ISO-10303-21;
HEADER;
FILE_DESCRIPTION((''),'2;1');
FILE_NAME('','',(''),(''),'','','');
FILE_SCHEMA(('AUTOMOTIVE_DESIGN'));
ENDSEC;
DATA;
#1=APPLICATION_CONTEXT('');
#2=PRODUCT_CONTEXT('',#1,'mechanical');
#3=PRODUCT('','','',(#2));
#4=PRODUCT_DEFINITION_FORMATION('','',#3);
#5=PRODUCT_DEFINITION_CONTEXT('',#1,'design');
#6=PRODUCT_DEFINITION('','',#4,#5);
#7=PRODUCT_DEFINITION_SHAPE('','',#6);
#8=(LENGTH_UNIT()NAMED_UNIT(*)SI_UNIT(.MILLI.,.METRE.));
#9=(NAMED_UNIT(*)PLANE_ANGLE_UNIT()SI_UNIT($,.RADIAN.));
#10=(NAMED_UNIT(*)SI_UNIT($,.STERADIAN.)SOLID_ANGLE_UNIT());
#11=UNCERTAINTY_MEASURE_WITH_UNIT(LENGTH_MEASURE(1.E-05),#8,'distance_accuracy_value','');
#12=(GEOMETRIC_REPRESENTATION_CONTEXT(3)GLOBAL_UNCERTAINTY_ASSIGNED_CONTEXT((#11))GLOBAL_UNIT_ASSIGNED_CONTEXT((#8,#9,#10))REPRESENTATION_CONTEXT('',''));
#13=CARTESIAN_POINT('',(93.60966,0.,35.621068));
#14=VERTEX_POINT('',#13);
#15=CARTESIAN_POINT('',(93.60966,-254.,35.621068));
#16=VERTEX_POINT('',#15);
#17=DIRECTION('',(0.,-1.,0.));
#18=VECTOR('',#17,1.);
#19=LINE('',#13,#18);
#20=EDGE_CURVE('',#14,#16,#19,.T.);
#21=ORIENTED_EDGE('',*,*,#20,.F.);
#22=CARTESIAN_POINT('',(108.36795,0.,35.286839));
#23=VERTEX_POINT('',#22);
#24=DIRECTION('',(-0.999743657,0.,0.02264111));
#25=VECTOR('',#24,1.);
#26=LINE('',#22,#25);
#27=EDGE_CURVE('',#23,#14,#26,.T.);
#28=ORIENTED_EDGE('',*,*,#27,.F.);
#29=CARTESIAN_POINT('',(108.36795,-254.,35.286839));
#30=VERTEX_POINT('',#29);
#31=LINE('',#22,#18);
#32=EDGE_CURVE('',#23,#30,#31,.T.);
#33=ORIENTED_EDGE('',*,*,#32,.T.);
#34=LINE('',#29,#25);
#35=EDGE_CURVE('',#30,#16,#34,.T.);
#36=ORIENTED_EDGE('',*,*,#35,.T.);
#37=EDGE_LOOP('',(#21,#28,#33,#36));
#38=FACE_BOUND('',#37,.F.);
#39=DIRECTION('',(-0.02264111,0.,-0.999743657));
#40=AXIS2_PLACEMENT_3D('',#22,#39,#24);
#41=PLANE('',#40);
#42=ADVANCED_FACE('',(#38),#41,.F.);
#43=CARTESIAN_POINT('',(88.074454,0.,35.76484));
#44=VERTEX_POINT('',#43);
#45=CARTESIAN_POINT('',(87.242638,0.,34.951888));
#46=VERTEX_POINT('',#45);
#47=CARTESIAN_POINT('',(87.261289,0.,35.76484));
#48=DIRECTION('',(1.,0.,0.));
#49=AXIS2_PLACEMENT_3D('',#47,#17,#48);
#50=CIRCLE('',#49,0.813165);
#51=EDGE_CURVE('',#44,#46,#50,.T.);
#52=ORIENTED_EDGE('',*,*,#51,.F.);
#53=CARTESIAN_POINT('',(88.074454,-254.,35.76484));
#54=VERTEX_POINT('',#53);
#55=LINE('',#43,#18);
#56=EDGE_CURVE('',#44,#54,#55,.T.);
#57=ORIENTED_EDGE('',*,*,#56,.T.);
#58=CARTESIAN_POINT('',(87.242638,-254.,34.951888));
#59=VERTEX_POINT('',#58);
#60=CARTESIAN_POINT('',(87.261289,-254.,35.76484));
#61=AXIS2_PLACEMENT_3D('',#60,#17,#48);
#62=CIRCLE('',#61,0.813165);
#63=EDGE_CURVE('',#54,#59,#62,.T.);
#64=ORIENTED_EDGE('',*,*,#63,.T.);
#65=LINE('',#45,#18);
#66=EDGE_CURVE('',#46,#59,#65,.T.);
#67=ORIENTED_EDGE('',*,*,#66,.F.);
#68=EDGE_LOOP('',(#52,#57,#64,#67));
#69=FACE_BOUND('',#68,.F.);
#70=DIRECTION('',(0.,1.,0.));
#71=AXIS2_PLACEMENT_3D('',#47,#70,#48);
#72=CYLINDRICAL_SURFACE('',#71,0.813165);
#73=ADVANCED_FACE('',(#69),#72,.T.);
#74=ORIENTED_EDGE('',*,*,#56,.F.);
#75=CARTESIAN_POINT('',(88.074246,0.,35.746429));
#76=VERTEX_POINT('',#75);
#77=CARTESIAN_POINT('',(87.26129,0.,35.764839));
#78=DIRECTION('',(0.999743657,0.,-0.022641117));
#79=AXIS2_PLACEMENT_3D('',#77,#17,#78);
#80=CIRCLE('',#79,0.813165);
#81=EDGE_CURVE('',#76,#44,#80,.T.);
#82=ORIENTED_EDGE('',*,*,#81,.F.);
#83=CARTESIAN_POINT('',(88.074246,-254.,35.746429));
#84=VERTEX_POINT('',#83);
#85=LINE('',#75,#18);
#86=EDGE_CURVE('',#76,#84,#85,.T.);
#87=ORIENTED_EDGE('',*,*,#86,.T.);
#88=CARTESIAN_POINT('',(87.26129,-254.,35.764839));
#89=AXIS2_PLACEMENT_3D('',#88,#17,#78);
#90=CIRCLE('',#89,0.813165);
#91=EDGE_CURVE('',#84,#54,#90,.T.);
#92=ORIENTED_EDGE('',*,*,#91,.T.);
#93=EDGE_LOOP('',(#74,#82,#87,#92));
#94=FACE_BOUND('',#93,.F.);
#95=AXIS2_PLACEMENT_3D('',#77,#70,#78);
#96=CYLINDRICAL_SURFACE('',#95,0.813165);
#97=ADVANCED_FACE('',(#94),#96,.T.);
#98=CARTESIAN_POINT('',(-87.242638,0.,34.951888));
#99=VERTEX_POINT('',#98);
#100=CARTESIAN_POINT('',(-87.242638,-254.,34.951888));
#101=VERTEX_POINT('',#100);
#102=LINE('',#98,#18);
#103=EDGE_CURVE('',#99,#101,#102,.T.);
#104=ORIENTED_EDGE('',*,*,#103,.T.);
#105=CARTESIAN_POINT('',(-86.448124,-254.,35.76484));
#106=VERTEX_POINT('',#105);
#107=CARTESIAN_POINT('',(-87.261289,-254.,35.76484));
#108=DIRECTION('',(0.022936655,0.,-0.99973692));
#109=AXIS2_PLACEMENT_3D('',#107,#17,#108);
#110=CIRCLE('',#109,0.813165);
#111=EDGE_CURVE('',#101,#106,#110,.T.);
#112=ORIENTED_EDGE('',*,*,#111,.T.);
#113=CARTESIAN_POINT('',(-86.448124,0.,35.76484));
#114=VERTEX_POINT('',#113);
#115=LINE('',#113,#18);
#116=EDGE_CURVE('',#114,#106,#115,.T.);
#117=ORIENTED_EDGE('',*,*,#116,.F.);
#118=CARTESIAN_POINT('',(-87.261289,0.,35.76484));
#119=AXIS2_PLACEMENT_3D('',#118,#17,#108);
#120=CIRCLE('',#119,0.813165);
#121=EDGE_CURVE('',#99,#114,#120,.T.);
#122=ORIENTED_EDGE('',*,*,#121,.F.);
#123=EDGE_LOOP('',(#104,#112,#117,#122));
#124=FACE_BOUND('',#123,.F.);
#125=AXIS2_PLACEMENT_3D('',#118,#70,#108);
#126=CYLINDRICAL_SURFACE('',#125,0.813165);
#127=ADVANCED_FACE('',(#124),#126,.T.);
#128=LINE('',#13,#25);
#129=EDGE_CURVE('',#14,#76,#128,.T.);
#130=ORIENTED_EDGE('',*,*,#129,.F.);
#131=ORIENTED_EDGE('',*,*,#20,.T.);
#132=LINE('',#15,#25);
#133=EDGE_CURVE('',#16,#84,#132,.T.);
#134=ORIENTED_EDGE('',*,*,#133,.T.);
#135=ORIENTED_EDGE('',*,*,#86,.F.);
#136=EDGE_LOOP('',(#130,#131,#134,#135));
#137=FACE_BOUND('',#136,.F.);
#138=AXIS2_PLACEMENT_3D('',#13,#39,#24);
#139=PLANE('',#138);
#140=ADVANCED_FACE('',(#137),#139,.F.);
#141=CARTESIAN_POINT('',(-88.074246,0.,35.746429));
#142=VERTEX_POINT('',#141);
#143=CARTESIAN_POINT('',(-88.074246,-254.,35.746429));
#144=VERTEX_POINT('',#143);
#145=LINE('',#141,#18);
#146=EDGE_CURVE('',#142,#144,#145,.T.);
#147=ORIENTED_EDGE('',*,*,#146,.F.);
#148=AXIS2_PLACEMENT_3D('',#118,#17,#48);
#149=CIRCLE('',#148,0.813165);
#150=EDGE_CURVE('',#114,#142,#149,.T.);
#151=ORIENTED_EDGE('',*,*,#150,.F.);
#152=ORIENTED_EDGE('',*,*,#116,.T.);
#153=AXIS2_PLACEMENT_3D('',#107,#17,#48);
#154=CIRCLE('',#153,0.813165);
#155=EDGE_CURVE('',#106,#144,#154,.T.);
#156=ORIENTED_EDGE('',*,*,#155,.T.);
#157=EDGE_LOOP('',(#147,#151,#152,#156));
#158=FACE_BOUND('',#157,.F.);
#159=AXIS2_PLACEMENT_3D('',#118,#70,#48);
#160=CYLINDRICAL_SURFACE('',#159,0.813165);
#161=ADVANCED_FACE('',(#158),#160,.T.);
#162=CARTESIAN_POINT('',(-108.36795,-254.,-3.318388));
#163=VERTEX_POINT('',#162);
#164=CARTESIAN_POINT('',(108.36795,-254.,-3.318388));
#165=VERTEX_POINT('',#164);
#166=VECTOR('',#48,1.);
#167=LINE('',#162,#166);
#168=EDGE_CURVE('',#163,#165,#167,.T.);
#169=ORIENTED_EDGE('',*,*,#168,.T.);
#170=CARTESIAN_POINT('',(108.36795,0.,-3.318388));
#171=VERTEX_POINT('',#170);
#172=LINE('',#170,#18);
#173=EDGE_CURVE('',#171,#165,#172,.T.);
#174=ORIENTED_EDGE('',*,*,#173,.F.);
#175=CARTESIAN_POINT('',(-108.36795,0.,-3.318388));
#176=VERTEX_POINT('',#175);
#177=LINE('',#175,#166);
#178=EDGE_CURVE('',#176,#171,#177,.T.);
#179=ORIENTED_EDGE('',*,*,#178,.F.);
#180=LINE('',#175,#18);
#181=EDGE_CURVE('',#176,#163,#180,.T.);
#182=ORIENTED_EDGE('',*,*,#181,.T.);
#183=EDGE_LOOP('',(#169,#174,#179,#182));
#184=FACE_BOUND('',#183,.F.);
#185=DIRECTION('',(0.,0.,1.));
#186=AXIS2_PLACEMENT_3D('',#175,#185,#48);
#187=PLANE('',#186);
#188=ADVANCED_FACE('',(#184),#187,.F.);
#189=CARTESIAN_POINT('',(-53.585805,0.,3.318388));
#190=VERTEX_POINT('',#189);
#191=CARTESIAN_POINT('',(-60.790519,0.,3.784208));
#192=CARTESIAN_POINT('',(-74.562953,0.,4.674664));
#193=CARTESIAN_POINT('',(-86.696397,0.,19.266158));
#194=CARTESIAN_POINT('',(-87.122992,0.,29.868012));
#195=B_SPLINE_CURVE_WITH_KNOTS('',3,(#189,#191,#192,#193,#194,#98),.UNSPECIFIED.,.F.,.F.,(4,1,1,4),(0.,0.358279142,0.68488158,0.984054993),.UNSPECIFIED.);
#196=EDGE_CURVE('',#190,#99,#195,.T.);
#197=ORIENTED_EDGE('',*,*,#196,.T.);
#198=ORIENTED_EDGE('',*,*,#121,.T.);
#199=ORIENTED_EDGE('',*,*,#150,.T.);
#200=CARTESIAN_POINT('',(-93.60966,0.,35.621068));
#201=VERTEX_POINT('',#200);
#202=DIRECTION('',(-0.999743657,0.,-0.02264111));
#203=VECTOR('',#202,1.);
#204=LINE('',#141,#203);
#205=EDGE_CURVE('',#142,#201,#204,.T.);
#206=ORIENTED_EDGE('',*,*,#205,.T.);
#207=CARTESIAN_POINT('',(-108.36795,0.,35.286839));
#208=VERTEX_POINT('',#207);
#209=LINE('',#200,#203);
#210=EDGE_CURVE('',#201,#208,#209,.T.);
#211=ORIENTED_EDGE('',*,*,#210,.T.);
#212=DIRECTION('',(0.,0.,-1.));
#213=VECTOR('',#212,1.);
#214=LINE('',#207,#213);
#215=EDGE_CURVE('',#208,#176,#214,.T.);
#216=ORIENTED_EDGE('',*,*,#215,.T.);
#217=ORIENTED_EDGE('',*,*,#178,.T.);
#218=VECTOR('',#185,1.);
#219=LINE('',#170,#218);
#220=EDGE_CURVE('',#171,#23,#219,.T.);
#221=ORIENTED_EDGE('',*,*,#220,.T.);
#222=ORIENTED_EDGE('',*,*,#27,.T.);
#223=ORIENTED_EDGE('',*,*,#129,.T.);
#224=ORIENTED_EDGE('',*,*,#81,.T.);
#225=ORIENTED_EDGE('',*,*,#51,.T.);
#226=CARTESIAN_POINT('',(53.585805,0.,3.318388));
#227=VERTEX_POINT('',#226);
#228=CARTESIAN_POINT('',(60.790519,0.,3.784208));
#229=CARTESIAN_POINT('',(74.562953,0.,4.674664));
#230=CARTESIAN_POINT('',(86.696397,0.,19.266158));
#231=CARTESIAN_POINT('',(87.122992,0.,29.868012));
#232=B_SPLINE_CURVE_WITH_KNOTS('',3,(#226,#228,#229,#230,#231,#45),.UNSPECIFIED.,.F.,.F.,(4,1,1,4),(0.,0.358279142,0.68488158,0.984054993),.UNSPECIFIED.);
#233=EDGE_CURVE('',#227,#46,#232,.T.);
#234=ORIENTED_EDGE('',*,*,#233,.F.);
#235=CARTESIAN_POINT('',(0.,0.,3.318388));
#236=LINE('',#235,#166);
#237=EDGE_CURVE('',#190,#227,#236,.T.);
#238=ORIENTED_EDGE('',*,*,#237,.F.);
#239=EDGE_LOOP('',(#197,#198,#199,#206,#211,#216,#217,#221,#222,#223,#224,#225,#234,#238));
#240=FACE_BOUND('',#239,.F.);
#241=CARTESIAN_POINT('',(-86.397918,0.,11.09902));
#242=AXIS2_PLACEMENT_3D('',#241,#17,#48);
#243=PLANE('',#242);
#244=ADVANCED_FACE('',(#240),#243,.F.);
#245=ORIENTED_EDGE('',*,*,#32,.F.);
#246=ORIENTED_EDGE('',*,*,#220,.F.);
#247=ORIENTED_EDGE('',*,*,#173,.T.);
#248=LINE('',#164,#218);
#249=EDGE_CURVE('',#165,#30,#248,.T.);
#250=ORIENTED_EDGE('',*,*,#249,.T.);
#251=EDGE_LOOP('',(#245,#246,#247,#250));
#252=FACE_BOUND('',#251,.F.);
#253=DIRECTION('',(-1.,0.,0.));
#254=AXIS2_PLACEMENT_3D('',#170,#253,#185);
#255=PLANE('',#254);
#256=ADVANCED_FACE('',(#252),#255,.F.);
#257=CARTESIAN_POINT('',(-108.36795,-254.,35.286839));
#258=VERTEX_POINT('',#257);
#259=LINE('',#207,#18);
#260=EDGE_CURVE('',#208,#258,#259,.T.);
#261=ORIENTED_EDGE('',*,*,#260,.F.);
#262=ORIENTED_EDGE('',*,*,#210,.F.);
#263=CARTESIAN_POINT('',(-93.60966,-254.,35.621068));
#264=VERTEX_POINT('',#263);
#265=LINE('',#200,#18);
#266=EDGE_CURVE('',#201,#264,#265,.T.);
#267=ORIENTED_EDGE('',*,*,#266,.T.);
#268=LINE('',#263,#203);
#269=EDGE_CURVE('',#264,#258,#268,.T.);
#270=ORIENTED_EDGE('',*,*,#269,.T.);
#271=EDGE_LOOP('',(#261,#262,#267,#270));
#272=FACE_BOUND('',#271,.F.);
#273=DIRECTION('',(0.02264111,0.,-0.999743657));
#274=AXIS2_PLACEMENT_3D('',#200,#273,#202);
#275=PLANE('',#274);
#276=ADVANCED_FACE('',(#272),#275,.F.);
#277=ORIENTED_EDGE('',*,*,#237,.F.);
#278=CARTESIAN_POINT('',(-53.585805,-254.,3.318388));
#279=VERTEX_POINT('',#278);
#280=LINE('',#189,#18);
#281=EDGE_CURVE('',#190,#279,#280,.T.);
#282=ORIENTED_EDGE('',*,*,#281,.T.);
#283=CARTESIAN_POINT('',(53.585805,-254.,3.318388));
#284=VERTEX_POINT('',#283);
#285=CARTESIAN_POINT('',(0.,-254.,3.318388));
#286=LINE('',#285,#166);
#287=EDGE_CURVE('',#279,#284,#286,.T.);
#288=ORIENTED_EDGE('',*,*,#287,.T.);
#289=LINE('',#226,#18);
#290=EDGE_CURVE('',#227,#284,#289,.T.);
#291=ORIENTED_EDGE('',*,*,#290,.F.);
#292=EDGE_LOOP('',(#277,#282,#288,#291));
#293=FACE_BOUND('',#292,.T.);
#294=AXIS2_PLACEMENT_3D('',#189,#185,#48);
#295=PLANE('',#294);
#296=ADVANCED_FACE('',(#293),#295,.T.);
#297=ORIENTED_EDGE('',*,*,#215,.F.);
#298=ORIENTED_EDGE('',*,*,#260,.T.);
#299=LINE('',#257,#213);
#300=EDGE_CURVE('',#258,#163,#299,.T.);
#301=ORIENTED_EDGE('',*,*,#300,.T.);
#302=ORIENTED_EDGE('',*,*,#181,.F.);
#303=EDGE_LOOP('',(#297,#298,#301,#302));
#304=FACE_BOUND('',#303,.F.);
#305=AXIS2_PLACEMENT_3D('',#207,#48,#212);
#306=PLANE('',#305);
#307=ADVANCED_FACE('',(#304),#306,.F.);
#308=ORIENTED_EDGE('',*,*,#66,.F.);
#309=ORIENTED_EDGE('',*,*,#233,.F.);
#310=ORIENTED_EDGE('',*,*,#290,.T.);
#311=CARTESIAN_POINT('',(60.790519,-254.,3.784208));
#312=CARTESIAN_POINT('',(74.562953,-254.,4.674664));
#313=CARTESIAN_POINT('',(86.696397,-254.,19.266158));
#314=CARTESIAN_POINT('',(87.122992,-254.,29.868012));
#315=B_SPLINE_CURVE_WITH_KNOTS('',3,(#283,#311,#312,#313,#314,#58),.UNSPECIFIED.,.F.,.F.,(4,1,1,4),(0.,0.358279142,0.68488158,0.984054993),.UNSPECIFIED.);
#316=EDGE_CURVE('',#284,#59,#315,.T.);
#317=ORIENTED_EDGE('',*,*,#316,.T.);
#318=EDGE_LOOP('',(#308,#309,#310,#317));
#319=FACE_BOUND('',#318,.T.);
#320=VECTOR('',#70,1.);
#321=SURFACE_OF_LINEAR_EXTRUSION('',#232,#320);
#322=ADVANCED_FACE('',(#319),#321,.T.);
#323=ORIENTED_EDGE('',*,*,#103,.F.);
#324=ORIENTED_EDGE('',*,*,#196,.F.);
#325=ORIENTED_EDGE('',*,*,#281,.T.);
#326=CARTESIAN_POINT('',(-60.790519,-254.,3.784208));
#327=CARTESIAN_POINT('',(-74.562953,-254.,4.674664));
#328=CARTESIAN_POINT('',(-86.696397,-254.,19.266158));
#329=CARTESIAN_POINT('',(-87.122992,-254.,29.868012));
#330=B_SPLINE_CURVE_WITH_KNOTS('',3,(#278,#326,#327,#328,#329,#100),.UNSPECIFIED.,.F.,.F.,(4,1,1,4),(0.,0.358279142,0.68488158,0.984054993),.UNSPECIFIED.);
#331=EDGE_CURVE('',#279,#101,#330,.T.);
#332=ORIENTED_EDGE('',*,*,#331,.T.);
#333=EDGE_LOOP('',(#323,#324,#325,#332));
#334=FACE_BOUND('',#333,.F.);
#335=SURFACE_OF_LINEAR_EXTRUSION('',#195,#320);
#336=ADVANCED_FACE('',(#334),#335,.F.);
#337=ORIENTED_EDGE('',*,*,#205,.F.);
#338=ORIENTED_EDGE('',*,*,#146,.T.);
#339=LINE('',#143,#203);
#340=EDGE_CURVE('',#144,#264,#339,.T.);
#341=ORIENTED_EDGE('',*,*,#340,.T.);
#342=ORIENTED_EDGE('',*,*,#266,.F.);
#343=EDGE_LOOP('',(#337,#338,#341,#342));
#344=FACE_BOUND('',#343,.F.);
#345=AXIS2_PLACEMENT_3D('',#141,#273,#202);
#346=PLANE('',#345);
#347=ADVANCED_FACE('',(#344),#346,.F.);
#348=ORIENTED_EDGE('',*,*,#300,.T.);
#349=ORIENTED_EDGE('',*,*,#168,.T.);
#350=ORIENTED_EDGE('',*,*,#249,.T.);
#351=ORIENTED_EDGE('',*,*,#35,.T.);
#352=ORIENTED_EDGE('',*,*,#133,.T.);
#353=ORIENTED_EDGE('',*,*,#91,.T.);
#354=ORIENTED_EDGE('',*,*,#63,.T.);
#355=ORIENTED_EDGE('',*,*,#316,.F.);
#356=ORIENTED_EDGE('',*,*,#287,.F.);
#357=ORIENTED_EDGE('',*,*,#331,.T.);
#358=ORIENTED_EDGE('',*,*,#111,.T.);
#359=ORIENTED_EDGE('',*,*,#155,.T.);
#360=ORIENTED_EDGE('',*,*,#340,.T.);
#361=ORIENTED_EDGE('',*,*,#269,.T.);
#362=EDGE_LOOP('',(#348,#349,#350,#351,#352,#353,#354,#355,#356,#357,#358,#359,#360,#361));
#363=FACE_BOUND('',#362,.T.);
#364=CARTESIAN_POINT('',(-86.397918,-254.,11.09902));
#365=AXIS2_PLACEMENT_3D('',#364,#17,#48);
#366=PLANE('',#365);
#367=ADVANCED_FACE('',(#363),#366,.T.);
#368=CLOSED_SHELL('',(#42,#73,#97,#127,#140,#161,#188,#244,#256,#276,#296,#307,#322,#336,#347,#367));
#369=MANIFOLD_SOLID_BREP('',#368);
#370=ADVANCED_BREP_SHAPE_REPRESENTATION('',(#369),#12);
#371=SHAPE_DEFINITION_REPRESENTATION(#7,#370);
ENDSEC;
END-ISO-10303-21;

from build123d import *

# Parameters (mm, degrees)
F0_W     = 107.1716099977
F0_H     = 6.6367755644
F1_DEPTH = 254


# Not quite as in the source:
# - ends of sketch curves that miss each other by under 0.0002 mm in the source are joined


with BuildPart() as f1:
    # F0 (on Front) → F1 (new body)
    with BuildSketch(Plane.XZ):
        with BuildLine():
            Line((-53.5858049989, -3.3183877822), (-53.5858049989, 3.3183877822))
            add(Edge.make_bspline(
                [(-53.5858049989, 3.3183877822), (-60.7905189574, 3.7842082585), (-74.5629530695, 4.6746644037), (-86.6963968754, 19.2661575582), (-87.1229924092, 29.8680118762), (-87.2426380733, 34.9518884332)],
                knots=[0, 0, 0, 0, 0.3582791422, 0.6848815801, 0.984054993, 0.984054993, 0.984054993, 0.984054993], degree=3))
            ThreePointArc((-87.2426380733, 34.9518884332), (-87.8230310318, 35.1768908631), (-88.0742459033, 35.7464285425))
            Line((-88.0742459033, 35.7464285425), (-93.6096602081, 35.6210684855))
            Line((-93.6096602081, 35.6210684855), (-108.3679497242, 35.286838758))
            Line((-108.3679497242, 35.286838758), (-108.3679497242, -3.3183877822))
            Line((-108.3679497242, -3.3183877822), (-53.5858049989, -3.3183877822))
        make_face()
        with BuildLine():
            add(Edge.make_bspline(
                [(53.5858049989, 3.3183877822), (60.7905189574, 3.7842082585), (74.5629530695, 4.6746644037), (86.6963968754, 19.2661575582), (87.1229924092, 29.8680118762), (87.2426380733, 34.9518884332)],
                knots=[0, 0, 0, 0, 0.3582791422, 0.6848815801, 0.984054993, 0.984054993, 0.984054993, 0.984054993], degree=3))
            Line((53.5858049989, 3.3183877822), (53.5858049989, -3.3183877822))
            Line((53.5858049989, -3.3183877822), (108.3679497242, -3.3183877822))
            Line((108.3679497242, -3.3183877822), (108.3679497242, 35.286838758))
            Line((108.3679497242, 35.286838758), (93.6096602081, 35.6210684855))
            Line((93.6096602081, 35.6210684855), (88.0742459033, 35.7464285425))
            ThreePointArc((88.0742459033, 35.7464285425), (87.8230310318, 35.1768908631), (87.2426380733, 34.9518884332))
        make_face()
        Rectangle(F0_W, F0_H)
        with BuildLine():
            add(Edge.make_bspline(
                [(-87.2426380733, 34.9518884332), (-87.2490148129, 35.2228431489), (-87.2551520855, 35.4938413246), (-87.2612893581, 35.7648395002)],
                knots=[0.984054993, 0.984054993, 0.984054993, 0.984054993, 1, 1, 1, 1], degree=3))
            ThreePointArc((-87.2426380733, 34.9518884332), (-86.6797380364, 35.1964774959), (-86.448124364, 35.7648395002))
            ThreePointArc((-86.448124364, 35.7648395002), (-87.270495427, 36.5779523805), (-88.0742459033, 35.7464285425))
            Line((-88.0742459033, 35.7464285425), (-87.2612893581, 35.7648395002))
        make_face()
        with BuildLine():
            ThreePointArc((-88.0742459033, 35.7464285425), (-87.8230310318, 35.1768908631), (-87.2426380733, 34.9518884332))
            add(Edge.make_bspline(
                [(-87.2426380733, 34.9518884332), (-87.2490148129, 35.2228431489), (-87.2551520855, 35.4938413246), (-87.2612893581, 35.7648395002)],
                knots=[0.984054993, 0.984054993, 0.984054993, 0.984054993, 1, 1, 1, 1], degree=3))
            Line((-87.2612893581, 35.7648395002), (-88.0742459033, 35.7464285425))
        make_face()
        with BuildLine():
            add(Edge.make_bspline(
                [(87.2426380733, 34.9518884332), (87.2490148129, 35.2228431489), (87.2551520855, 35.4938413246), (87.2612893581, 35.7648395002)],
                knots=[0.984054993, 0.984054993, 0.984054993, 0.984054993, 1, 1, 1, 1], degree=3))
            ThreePointArc((87.2426380733, 34.9518884332), (87.8230310318, 35.1768908631), (88.0742459033, 35.7464285425))
            Line((88.0742459033, 35.7464285425), (87.2612893581, 35.7648395002))
        make_face()
        with BuildLine():
            ThreePointArc((88.0744543523, 35.7648395002), (86.6929273539, 36.346390822), (87.2426380733, 34.9518884332))
            add(Edge.make_bspline(
                [(87.2426380733, 34.9518884332), (87.2490148129, 35.2228431489), (87.2551520855, 35.4938413246), (87.2612893581, 35.7648395002)],
                knots=[0.984054993, 0.984054993, 0.984054993, 0.984054993, 1, 1, 1, 1], degree=3))
            Line((87.2612893581, 35.7648395002), (88.0742459033, 35.7464285425))
            ThreePointArc((88.0742459033, 35.7464285425), (88.0744022384, 35.7556334313), (88.0744543523, 35.7648395002))
        make_face()
    extrude(amount=F1_DEPTH)


solid = f1.part
